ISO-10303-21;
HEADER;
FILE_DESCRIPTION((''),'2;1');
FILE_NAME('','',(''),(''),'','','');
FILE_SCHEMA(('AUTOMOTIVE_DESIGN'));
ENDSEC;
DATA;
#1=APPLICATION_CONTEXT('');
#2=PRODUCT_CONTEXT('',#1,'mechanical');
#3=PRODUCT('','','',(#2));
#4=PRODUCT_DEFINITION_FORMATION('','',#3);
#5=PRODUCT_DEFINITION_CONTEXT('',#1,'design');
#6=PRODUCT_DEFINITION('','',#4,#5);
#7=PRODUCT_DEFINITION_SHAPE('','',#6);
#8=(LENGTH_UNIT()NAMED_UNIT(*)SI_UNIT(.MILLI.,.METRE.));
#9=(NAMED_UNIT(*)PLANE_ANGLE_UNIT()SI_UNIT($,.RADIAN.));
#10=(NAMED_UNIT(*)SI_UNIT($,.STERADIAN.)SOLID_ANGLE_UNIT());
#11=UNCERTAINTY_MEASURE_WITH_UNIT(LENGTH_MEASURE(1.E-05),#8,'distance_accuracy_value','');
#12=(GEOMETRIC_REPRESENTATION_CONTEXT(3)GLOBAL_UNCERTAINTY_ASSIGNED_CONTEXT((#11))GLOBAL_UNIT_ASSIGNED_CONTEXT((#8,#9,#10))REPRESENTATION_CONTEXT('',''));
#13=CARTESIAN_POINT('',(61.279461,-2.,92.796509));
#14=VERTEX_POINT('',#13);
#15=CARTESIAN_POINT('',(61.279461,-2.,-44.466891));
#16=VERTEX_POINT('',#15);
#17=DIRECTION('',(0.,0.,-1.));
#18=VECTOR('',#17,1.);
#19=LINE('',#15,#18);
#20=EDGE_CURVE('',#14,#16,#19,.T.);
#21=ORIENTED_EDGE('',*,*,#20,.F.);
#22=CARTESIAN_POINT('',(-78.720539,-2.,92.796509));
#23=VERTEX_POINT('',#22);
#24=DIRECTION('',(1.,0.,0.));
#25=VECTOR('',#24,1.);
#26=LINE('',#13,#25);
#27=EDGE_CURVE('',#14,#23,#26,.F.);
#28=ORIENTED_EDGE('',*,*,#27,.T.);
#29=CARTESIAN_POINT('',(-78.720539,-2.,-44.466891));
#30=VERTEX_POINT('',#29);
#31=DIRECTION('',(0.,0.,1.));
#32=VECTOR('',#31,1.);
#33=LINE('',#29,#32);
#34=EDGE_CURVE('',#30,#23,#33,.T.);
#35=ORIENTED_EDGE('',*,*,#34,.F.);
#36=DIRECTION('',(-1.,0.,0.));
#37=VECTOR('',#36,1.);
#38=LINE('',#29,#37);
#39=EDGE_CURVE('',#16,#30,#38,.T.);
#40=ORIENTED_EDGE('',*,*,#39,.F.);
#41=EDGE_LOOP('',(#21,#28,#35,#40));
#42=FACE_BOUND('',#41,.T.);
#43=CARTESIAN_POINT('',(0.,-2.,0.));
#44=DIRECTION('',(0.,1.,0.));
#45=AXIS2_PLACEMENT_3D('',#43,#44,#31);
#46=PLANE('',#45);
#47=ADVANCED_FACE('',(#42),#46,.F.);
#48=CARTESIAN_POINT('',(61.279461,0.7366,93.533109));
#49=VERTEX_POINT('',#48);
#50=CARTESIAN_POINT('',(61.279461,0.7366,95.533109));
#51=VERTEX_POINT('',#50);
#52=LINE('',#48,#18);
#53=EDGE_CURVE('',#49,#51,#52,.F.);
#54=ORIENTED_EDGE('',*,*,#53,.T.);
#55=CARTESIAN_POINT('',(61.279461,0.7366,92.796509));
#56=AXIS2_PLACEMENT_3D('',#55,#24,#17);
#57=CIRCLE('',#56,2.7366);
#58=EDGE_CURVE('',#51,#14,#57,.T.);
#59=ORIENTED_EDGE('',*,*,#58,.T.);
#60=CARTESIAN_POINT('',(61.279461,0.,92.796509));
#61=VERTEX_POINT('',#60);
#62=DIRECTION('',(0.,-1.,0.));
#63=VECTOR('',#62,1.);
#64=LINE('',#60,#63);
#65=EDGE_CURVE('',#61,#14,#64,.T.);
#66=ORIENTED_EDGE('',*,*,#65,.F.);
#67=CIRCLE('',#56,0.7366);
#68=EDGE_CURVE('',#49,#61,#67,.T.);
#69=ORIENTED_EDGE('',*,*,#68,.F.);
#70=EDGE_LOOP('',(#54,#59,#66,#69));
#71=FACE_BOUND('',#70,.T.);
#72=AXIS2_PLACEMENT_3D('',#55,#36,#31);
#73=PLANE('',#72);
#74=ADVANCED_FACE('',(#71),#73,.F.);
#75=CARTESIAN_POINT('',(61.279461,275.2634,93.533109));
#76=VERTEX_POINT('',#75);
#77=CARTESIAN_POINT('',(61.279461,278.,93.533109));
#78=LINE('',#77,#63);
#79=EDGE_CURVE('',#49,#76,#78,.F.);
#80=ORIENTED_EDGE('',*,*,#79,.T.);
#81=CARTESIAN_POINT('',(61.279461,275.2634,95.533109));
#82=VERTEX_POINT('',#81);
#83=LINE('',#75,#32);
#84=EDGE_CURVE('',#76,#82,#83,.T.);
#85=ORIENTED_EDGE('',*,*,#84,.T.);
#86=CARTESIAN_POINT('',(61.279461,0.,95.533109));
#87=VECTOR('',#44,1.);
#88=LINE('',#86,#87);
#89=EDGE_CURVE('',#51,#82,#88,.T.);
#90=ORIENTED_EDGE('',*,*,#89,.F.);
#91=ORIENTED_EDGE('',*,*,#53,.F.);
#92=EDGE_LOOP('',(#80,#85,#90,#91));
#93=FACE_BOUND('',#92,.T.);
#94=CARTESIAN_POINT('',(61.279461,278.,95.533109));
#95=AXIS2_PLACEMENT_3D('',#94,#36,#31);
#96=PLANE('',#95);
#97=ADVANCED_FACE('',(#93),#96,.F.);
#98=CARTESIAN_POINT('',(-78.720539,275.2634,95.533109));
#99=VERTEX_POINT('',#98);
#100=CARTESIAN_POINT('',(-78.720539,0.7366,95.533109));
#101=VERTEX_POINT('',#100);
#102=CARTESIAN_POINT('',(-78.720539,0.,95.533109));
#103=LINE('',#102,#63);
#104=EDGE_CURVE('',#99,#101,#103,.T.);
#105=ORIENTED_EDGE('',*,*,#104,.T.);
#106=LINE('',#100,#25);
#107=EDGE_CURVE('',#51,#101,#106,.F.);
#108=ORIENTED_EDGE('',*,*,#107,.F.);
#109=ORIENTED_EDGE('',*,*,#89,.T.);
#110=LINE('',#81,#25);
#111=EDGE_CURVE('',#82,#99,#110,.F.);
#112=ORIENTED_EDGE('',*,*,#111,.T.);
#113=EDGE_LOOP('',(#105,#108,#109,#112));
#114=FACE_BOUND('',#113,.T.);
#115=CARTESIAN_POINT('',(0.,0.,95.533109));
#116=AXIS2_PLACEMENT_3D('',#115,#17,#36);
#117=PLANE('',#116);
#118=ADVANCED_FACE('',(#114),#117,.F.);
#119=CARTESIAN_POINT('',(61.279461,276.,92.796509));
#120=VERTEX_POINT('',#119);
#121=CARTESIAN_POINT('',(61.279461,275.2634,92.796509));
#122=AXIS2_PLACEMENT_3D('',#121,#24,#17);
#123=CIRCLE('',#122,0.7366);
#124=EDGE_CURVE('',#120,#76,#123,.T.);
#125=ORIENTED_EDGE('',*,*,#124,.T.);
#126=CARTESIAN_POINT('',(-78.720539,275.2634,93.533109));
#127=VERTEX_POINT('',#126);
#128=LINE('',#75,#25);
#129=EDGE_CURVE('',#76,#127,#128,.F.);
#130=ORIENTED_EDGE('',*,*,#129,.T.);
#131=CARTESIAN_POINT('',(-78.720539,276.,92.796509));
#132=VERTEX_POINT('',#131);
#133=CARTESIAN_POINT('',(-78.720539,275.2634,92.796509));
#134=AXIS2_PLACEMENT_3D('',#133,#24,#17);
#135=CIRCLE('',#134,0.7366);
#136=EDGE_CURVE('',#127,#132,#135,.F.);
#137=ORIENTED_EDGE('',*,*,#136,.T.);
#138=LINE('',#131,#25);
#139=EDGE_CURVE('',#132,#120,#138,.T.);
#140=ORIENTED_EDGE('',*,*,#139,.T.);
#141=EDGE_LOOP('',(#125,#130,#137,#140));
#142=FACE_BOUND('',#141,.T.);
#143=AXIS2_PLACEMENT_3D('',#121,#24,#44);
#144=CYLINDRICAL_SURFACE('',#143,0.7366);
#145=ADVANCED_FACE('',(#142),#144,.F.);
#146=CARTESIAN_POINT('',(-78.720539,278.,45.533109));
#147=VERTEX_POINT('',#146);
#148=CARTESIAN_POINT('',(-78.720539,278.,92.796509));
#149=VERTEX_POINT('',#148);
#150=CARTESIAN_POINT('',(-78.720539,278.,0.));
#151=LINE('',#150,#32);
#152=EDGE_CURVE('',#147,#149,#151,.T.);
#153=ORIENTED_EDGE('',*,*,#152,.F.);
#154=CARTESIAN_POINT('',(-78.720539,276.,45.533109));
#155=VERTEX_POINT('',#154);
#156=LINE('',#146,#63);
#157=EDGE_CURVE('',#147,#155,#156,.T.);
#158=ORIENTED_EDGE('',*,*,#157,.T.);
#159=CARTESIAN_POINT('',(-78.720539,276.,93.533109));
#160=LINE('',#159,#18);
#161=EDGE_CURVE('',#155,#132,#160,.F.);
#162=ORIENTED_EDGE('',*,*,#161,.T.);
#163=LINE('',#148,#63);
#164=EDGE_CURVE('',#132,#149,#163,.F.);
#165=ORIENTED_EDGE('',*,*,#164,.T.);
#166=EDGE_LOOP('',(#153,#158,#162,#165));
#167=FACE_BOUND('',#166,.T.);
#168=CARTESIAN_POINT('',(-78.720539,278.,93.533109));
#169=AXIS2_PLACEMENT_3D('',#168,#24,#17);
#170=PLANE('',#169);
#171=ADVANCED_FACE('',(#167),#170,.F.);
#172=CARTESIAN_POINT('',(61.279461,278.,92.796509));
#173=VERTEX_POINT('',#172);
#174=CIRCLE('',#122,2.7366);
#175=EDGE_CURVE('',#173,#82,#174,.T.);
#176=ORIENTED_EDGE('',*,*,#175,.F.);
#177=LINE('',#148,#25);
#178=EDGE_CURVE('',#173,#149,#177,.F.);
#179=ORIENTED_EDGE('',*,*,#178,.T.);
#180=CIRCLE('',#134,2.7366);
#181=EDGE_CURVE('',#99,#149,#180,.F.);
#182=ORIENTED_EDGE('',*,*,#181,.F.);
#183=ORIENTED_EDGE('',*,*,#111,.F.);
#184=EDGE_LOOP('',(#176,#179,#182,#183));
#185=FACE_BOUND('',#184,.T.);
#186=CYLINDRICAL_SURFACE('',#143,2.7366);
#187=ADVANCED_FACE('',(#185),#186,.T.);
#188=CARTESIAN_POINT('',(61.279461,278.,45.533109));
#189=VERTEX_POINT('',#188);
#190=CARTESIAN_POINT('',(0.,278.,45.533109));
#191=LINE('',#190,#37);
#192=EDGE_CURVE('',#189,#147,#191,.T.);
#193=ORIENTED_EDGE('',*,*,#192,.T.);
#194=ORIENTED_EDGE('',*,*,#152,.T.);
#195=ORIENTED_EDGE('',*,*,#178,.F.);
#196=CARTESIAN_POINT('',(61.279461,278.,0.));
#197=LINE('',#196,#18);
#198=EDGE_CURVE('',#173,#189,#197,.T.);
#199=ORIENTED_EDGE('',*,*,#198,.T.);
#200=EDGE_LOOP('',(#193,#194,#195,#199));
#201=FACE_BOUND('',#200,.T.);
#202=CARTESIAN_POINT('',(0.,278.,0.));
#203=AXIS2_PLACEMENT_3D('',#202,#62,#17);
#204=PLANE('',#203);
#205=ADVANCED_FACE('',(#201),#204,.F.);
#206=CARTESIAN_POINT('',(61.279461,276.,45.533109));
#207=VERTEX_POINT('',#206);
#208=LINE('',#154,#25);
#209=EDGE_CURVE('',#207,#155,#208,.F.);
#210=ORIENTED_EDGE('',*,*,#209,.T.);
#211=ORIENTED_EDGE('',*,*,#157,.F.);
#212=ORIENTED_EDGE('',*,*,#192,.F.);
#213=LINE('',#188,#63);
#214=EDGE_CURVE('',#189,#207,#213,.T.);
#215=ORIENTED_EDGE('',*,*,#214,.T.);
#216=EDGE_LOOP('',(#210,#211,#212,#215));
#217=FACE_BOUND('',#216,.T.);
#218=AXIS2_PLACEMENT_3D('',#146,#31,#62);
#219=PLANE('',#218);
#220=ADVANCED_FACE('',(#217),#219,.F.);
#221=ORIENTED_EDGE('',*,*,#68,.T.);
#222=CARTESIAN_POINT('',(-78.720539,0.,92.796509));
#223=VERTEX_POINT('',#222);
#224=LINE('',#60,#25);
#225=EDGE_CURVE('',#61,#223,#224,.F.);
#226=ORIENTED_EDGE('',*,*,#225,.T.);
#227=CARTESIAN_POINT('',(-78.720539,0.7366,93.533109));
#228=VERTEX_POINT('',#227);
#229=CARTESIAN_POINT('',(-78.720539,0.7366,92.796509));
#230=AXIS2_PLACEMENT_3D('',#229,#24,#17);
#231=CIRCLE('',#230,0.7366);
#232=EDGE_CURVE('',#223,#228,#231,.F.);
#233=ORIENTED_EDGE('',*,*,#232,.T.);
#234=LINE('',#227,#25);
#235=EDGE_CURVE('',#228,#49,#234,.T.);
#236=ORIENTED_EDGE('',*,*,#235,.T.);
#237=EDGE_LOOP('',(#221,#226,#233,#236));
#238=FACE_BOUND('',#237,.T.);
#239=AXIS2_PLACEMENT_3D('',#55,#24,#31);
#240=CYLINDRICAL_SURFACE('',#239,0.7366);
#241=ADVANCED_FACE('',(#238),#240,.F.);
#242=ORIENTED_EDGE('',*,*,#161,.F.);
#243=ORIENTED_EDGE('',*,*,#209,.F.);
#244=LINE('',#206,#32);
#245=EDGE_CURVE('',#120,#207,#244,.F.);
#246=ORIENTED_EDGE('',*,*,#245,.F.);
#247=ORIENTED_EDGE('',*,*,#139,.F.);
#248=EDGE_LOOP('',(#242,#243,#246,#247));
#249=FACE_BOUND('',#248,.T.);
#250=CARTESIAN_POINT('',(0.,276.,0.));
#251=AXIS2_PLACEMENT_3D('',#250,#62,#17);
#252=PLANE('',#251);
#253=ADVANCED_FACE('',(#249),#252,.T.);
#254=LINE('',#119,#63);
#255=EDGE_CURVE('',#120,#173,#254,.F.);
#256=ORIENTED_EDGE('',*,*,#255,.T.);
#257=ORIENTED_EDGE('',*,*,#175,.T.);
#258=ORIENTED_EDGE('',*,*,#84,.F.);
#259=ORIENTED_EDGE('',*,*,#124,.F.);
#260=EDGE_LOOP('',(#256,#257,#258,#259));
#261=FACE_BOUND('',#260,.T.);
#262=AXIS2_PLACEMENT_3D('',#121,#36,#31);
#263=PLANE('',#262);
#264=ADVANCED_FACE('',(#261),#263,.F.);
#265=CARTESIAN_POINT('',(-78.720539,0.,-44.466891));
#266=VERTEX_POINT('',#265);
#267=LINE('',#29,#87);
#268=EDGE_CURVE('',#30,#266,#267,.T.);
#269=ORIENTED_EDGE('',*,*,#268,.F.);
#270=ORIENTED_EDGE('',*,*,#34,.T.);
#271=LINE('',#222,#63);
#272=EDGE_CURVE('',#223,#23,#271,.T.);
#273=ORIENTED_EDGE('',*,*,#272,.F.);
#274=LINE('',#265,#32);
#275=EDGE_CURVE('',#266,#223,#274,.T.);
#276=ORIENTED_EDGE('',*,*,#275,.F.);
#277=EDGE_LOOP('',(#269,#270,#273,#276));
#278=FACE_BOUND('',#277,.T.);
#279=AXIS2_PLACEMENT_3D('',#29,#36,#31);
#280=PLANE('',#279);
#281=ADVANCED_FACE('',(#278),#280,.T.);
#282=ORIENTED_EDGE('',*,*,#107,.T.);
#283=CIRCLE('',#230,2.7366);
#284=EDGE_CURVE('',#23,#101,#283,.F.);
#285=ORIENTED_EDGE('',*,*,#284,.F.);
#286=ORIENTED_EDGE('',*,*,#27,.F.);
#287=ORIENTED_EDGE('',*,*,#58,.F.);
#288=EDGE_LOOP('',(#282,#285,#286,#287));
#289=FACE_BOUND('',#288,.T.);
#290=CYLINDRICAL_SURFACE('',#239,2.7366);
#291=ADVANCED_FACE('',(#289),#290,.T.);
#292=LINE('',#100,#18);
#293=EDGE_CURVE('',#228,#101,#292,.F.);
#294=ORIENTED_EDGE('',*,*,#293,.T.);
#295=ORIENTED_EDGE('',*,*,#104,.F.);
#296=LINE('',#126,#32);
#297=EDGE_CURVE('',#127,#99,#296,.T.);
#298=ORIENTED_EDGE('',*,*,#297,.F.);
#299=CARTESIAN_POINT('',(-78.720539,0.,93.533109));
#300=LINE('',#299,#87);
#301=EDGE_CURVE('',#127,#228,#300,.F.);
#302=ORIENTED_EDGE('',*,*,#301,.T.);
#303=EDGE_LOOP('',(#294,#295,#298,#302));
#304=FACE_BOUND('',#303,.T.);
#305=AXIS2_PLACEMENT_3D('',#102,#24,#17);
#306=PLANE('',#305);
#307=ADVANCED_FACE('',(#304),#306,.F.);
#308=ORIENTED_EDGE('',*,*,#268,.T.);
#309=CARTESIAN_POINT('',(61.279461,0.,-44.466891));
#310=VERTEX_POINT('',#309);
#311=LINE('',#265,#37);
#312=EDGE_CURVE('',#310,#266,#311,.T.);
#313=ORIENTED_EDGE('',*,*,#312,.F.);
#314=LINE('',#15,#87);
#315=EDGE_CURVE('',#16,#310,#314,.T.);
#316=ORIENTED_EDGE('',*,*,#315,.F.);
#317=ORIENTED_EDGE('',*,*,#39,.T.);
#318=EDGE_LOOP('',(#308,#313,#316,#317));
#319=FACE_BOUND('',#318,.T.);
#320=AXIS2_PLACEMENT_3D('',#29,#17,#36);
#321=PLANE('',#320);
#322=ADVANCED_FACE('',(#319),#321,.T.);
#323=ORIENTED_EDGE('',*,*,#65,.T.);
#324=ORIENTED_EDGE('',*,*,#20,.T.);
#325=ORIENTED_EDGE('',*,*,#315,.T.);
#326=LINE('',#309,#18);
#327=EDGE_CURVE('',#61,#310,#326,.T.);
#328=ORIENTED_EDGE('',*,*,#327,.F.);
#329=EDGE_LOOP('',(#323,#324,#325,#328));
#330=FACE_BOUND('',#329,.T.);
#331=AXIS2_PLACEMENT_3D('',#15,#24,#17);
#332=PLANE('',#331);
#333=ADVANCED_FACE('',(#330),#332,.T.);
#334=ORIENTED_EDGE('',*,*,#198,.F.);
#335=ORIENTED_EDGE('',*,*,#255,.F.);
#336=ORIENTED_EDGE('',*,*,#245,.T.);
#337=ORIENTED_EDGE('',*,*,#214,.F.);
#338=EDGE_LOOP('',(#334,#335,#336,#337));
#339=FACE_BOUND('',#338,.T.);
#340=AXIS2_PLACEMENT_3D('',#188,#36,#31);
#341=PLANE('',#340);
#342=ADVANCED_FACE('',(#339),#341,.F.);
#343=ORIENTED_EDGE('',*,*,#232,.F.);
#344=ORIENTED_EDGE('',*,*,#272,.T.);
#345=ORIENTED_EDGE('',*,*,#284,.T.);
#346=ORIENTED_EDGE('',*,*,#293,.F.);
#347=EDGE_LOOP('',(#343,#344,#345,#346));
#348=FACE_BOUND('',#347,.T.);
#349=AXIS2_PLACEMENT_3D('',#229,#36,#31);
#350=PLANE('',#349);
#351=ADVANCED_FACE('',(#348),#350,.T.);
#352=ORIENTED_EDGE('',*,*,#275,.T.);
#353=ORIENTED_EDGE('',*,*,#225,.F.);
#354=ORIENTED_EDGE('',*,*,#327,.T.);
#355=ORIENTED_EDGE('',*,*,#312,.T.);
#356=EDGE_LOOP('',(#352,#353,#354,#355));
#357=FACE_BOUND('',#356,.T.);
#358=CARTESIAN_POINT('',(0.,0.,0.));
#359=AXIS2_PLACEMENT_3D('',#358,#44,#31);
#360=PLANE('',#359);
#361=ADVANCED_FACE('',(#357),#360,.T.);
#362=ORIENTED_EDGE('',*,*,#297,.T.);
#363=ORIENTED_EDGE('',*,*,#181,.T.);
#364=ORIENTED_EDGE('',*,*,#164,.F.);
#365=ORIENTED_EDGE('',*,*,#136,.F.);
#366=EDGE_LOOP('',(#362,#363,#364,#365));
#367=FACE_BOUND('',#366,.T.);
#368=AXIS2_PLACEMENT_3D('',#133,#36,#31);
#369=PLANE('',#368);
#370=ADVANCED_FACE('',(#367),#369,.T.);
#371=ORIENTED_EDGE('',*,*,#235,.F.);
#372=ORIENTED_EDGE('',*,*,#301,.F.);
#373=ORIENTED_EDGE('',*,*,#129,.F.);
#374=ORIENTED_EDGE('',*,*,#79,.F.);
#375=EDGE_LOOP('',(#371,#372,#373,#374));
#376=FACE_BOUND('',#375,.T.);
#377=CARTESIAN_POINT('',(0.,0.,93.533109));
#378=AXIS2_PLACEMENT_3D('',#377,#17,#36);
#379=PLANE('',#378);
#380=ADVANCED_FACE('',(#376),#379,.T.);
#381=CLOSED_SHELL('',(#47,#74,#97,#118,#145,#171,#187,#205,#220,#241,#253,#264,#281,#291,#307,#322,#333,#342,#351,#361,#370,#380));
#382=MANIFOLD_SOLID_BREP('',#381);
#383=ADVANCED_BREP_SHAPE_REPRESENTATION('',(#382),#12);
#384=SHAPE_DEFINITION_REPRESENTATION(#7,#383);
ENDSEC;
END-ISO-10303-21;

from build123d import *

# Parameters (mm, degrees)
SKETCH1_W                    = 140
SKETCH1_H                    = 140
BASE_FLANGE1_DEPTH           = 2
EDGE_FLANGE2_STRIP_W         = 9.4732
EDGE_FLANGE2_STRIP_H         = 2
EDGE_FLANGE2_STRIP_CUT_DEPTH = 140
EDGE_FLANGE2_DEPTH           = 140
EDGE_FLANGE3_STRIP_W         = 9.4732
EDGE_FLANGE3_STRIP_H         = 2
EDGE_FLANGE3_STRIP_CUT_DEPTH = 140
EDGE_FLANGE3_DEPTH           = 140


# Sheet-metal steps are written as plain solids
with BuildPart() as part:
    # Sketch1 → Base-Flange1 (new body)
    with BuildSketch(Plane(origin=(0, 0, 0), x_dir=(1, 0, 0), z_dir=(0, 1, 0))):
        with Locations((-8.720538721, -25.533108866)):
            Rectangle(SKETCH1_W, SKETCH1_H)
    extrude(amount=-BASE_FLANGE1_DEPTH)

    # Edge-Flange2 strip (across the edge) → Edge-Flange2 strip cut (cut)
    with BuildSketch(Plane(origin=(-78.720538721, 0, 95.533108866), x_dir=(0, 0, -1), z_dir=(1, 0, 0))):
        with Locations((-2, -1)):
            Rectangle(EDGE_FLANGE2_STRIP_W, EDGE_FLANGE2_STRIP_H)
    extrude(amount=EDGE_FLANGE2_STRIP_CUT_DEPTH, mode=Mode.SUBTRACT)

    # Edge-Flange2 section (across the edge) → Edge-Flange2 (add)
    with BuildSketch(Plane(origin=(-78.720538721, 0, 95.533108866), x_dir=(0, 0, -1), z_dir=(1, 0, 0))):
        with BuildLine():
            Line((0, 0.7366), (0, 278))
            Line((0, 278), (2, 278))
            Line((2, 278), (2, 0.7366))
            ThreePointArc((2, 0.7366), (2.215745145, 0.215745145), (2.7366, 0))
            Line((2.7366, 0), (2.7366, -2))
            ThreePointArc((2.7366, -2), (0.801531583, -1.198468417), (0, 0.7366))
        make_face()
    extrude(amount=EDGE_FLANGE2_DEPTH)

    # Edge-Flange3 strip (across the edge) → Edge-Flange3 strip cut (cut)
    with BuildSketch(Plane(origin=(-78.720538721, 278, 93.533108866), x_dir=(0, -1, 0), z_dir=(1, 0, 0))):
        with Locations((-2, -1)):
            Rectangle(EDGE_FLANGE3_STRIP_W, EDGE_FLANGE3_STRIP_H)
    extrude(amount=EDGE_FLANGE3_STRIP_CUT_DEPTH, mode=Mode.SUBTRACT)

    # Edge-Flange3 section (across the edge) → Edge-Flange3 (add)
    with BuildSketch(Plane(origin=(-78.720538721, 278, 93.533108866), x_dir=(0, -1, 0), z_dir=(1, 0, 0))):
        with BuildLine():
            Line((0, 0.7366), (0, 48))
            Line((0, 48), (2, 48))
            Line((2, 48), (2, 0.7366))
            ThreePointArc((2, 0.7366), (2.215745145, 0.215745145), (2.7366, 0))
            Line((2.7366, 0), (2.7366, -2))
            ThreePointArc((2.7366, -2), (0.801531583, -1.198468417), (0, 0.7366))
        make_face()
    extrude(amount=EDGE_FLANGE3_DEPTH)


solid = part.part
